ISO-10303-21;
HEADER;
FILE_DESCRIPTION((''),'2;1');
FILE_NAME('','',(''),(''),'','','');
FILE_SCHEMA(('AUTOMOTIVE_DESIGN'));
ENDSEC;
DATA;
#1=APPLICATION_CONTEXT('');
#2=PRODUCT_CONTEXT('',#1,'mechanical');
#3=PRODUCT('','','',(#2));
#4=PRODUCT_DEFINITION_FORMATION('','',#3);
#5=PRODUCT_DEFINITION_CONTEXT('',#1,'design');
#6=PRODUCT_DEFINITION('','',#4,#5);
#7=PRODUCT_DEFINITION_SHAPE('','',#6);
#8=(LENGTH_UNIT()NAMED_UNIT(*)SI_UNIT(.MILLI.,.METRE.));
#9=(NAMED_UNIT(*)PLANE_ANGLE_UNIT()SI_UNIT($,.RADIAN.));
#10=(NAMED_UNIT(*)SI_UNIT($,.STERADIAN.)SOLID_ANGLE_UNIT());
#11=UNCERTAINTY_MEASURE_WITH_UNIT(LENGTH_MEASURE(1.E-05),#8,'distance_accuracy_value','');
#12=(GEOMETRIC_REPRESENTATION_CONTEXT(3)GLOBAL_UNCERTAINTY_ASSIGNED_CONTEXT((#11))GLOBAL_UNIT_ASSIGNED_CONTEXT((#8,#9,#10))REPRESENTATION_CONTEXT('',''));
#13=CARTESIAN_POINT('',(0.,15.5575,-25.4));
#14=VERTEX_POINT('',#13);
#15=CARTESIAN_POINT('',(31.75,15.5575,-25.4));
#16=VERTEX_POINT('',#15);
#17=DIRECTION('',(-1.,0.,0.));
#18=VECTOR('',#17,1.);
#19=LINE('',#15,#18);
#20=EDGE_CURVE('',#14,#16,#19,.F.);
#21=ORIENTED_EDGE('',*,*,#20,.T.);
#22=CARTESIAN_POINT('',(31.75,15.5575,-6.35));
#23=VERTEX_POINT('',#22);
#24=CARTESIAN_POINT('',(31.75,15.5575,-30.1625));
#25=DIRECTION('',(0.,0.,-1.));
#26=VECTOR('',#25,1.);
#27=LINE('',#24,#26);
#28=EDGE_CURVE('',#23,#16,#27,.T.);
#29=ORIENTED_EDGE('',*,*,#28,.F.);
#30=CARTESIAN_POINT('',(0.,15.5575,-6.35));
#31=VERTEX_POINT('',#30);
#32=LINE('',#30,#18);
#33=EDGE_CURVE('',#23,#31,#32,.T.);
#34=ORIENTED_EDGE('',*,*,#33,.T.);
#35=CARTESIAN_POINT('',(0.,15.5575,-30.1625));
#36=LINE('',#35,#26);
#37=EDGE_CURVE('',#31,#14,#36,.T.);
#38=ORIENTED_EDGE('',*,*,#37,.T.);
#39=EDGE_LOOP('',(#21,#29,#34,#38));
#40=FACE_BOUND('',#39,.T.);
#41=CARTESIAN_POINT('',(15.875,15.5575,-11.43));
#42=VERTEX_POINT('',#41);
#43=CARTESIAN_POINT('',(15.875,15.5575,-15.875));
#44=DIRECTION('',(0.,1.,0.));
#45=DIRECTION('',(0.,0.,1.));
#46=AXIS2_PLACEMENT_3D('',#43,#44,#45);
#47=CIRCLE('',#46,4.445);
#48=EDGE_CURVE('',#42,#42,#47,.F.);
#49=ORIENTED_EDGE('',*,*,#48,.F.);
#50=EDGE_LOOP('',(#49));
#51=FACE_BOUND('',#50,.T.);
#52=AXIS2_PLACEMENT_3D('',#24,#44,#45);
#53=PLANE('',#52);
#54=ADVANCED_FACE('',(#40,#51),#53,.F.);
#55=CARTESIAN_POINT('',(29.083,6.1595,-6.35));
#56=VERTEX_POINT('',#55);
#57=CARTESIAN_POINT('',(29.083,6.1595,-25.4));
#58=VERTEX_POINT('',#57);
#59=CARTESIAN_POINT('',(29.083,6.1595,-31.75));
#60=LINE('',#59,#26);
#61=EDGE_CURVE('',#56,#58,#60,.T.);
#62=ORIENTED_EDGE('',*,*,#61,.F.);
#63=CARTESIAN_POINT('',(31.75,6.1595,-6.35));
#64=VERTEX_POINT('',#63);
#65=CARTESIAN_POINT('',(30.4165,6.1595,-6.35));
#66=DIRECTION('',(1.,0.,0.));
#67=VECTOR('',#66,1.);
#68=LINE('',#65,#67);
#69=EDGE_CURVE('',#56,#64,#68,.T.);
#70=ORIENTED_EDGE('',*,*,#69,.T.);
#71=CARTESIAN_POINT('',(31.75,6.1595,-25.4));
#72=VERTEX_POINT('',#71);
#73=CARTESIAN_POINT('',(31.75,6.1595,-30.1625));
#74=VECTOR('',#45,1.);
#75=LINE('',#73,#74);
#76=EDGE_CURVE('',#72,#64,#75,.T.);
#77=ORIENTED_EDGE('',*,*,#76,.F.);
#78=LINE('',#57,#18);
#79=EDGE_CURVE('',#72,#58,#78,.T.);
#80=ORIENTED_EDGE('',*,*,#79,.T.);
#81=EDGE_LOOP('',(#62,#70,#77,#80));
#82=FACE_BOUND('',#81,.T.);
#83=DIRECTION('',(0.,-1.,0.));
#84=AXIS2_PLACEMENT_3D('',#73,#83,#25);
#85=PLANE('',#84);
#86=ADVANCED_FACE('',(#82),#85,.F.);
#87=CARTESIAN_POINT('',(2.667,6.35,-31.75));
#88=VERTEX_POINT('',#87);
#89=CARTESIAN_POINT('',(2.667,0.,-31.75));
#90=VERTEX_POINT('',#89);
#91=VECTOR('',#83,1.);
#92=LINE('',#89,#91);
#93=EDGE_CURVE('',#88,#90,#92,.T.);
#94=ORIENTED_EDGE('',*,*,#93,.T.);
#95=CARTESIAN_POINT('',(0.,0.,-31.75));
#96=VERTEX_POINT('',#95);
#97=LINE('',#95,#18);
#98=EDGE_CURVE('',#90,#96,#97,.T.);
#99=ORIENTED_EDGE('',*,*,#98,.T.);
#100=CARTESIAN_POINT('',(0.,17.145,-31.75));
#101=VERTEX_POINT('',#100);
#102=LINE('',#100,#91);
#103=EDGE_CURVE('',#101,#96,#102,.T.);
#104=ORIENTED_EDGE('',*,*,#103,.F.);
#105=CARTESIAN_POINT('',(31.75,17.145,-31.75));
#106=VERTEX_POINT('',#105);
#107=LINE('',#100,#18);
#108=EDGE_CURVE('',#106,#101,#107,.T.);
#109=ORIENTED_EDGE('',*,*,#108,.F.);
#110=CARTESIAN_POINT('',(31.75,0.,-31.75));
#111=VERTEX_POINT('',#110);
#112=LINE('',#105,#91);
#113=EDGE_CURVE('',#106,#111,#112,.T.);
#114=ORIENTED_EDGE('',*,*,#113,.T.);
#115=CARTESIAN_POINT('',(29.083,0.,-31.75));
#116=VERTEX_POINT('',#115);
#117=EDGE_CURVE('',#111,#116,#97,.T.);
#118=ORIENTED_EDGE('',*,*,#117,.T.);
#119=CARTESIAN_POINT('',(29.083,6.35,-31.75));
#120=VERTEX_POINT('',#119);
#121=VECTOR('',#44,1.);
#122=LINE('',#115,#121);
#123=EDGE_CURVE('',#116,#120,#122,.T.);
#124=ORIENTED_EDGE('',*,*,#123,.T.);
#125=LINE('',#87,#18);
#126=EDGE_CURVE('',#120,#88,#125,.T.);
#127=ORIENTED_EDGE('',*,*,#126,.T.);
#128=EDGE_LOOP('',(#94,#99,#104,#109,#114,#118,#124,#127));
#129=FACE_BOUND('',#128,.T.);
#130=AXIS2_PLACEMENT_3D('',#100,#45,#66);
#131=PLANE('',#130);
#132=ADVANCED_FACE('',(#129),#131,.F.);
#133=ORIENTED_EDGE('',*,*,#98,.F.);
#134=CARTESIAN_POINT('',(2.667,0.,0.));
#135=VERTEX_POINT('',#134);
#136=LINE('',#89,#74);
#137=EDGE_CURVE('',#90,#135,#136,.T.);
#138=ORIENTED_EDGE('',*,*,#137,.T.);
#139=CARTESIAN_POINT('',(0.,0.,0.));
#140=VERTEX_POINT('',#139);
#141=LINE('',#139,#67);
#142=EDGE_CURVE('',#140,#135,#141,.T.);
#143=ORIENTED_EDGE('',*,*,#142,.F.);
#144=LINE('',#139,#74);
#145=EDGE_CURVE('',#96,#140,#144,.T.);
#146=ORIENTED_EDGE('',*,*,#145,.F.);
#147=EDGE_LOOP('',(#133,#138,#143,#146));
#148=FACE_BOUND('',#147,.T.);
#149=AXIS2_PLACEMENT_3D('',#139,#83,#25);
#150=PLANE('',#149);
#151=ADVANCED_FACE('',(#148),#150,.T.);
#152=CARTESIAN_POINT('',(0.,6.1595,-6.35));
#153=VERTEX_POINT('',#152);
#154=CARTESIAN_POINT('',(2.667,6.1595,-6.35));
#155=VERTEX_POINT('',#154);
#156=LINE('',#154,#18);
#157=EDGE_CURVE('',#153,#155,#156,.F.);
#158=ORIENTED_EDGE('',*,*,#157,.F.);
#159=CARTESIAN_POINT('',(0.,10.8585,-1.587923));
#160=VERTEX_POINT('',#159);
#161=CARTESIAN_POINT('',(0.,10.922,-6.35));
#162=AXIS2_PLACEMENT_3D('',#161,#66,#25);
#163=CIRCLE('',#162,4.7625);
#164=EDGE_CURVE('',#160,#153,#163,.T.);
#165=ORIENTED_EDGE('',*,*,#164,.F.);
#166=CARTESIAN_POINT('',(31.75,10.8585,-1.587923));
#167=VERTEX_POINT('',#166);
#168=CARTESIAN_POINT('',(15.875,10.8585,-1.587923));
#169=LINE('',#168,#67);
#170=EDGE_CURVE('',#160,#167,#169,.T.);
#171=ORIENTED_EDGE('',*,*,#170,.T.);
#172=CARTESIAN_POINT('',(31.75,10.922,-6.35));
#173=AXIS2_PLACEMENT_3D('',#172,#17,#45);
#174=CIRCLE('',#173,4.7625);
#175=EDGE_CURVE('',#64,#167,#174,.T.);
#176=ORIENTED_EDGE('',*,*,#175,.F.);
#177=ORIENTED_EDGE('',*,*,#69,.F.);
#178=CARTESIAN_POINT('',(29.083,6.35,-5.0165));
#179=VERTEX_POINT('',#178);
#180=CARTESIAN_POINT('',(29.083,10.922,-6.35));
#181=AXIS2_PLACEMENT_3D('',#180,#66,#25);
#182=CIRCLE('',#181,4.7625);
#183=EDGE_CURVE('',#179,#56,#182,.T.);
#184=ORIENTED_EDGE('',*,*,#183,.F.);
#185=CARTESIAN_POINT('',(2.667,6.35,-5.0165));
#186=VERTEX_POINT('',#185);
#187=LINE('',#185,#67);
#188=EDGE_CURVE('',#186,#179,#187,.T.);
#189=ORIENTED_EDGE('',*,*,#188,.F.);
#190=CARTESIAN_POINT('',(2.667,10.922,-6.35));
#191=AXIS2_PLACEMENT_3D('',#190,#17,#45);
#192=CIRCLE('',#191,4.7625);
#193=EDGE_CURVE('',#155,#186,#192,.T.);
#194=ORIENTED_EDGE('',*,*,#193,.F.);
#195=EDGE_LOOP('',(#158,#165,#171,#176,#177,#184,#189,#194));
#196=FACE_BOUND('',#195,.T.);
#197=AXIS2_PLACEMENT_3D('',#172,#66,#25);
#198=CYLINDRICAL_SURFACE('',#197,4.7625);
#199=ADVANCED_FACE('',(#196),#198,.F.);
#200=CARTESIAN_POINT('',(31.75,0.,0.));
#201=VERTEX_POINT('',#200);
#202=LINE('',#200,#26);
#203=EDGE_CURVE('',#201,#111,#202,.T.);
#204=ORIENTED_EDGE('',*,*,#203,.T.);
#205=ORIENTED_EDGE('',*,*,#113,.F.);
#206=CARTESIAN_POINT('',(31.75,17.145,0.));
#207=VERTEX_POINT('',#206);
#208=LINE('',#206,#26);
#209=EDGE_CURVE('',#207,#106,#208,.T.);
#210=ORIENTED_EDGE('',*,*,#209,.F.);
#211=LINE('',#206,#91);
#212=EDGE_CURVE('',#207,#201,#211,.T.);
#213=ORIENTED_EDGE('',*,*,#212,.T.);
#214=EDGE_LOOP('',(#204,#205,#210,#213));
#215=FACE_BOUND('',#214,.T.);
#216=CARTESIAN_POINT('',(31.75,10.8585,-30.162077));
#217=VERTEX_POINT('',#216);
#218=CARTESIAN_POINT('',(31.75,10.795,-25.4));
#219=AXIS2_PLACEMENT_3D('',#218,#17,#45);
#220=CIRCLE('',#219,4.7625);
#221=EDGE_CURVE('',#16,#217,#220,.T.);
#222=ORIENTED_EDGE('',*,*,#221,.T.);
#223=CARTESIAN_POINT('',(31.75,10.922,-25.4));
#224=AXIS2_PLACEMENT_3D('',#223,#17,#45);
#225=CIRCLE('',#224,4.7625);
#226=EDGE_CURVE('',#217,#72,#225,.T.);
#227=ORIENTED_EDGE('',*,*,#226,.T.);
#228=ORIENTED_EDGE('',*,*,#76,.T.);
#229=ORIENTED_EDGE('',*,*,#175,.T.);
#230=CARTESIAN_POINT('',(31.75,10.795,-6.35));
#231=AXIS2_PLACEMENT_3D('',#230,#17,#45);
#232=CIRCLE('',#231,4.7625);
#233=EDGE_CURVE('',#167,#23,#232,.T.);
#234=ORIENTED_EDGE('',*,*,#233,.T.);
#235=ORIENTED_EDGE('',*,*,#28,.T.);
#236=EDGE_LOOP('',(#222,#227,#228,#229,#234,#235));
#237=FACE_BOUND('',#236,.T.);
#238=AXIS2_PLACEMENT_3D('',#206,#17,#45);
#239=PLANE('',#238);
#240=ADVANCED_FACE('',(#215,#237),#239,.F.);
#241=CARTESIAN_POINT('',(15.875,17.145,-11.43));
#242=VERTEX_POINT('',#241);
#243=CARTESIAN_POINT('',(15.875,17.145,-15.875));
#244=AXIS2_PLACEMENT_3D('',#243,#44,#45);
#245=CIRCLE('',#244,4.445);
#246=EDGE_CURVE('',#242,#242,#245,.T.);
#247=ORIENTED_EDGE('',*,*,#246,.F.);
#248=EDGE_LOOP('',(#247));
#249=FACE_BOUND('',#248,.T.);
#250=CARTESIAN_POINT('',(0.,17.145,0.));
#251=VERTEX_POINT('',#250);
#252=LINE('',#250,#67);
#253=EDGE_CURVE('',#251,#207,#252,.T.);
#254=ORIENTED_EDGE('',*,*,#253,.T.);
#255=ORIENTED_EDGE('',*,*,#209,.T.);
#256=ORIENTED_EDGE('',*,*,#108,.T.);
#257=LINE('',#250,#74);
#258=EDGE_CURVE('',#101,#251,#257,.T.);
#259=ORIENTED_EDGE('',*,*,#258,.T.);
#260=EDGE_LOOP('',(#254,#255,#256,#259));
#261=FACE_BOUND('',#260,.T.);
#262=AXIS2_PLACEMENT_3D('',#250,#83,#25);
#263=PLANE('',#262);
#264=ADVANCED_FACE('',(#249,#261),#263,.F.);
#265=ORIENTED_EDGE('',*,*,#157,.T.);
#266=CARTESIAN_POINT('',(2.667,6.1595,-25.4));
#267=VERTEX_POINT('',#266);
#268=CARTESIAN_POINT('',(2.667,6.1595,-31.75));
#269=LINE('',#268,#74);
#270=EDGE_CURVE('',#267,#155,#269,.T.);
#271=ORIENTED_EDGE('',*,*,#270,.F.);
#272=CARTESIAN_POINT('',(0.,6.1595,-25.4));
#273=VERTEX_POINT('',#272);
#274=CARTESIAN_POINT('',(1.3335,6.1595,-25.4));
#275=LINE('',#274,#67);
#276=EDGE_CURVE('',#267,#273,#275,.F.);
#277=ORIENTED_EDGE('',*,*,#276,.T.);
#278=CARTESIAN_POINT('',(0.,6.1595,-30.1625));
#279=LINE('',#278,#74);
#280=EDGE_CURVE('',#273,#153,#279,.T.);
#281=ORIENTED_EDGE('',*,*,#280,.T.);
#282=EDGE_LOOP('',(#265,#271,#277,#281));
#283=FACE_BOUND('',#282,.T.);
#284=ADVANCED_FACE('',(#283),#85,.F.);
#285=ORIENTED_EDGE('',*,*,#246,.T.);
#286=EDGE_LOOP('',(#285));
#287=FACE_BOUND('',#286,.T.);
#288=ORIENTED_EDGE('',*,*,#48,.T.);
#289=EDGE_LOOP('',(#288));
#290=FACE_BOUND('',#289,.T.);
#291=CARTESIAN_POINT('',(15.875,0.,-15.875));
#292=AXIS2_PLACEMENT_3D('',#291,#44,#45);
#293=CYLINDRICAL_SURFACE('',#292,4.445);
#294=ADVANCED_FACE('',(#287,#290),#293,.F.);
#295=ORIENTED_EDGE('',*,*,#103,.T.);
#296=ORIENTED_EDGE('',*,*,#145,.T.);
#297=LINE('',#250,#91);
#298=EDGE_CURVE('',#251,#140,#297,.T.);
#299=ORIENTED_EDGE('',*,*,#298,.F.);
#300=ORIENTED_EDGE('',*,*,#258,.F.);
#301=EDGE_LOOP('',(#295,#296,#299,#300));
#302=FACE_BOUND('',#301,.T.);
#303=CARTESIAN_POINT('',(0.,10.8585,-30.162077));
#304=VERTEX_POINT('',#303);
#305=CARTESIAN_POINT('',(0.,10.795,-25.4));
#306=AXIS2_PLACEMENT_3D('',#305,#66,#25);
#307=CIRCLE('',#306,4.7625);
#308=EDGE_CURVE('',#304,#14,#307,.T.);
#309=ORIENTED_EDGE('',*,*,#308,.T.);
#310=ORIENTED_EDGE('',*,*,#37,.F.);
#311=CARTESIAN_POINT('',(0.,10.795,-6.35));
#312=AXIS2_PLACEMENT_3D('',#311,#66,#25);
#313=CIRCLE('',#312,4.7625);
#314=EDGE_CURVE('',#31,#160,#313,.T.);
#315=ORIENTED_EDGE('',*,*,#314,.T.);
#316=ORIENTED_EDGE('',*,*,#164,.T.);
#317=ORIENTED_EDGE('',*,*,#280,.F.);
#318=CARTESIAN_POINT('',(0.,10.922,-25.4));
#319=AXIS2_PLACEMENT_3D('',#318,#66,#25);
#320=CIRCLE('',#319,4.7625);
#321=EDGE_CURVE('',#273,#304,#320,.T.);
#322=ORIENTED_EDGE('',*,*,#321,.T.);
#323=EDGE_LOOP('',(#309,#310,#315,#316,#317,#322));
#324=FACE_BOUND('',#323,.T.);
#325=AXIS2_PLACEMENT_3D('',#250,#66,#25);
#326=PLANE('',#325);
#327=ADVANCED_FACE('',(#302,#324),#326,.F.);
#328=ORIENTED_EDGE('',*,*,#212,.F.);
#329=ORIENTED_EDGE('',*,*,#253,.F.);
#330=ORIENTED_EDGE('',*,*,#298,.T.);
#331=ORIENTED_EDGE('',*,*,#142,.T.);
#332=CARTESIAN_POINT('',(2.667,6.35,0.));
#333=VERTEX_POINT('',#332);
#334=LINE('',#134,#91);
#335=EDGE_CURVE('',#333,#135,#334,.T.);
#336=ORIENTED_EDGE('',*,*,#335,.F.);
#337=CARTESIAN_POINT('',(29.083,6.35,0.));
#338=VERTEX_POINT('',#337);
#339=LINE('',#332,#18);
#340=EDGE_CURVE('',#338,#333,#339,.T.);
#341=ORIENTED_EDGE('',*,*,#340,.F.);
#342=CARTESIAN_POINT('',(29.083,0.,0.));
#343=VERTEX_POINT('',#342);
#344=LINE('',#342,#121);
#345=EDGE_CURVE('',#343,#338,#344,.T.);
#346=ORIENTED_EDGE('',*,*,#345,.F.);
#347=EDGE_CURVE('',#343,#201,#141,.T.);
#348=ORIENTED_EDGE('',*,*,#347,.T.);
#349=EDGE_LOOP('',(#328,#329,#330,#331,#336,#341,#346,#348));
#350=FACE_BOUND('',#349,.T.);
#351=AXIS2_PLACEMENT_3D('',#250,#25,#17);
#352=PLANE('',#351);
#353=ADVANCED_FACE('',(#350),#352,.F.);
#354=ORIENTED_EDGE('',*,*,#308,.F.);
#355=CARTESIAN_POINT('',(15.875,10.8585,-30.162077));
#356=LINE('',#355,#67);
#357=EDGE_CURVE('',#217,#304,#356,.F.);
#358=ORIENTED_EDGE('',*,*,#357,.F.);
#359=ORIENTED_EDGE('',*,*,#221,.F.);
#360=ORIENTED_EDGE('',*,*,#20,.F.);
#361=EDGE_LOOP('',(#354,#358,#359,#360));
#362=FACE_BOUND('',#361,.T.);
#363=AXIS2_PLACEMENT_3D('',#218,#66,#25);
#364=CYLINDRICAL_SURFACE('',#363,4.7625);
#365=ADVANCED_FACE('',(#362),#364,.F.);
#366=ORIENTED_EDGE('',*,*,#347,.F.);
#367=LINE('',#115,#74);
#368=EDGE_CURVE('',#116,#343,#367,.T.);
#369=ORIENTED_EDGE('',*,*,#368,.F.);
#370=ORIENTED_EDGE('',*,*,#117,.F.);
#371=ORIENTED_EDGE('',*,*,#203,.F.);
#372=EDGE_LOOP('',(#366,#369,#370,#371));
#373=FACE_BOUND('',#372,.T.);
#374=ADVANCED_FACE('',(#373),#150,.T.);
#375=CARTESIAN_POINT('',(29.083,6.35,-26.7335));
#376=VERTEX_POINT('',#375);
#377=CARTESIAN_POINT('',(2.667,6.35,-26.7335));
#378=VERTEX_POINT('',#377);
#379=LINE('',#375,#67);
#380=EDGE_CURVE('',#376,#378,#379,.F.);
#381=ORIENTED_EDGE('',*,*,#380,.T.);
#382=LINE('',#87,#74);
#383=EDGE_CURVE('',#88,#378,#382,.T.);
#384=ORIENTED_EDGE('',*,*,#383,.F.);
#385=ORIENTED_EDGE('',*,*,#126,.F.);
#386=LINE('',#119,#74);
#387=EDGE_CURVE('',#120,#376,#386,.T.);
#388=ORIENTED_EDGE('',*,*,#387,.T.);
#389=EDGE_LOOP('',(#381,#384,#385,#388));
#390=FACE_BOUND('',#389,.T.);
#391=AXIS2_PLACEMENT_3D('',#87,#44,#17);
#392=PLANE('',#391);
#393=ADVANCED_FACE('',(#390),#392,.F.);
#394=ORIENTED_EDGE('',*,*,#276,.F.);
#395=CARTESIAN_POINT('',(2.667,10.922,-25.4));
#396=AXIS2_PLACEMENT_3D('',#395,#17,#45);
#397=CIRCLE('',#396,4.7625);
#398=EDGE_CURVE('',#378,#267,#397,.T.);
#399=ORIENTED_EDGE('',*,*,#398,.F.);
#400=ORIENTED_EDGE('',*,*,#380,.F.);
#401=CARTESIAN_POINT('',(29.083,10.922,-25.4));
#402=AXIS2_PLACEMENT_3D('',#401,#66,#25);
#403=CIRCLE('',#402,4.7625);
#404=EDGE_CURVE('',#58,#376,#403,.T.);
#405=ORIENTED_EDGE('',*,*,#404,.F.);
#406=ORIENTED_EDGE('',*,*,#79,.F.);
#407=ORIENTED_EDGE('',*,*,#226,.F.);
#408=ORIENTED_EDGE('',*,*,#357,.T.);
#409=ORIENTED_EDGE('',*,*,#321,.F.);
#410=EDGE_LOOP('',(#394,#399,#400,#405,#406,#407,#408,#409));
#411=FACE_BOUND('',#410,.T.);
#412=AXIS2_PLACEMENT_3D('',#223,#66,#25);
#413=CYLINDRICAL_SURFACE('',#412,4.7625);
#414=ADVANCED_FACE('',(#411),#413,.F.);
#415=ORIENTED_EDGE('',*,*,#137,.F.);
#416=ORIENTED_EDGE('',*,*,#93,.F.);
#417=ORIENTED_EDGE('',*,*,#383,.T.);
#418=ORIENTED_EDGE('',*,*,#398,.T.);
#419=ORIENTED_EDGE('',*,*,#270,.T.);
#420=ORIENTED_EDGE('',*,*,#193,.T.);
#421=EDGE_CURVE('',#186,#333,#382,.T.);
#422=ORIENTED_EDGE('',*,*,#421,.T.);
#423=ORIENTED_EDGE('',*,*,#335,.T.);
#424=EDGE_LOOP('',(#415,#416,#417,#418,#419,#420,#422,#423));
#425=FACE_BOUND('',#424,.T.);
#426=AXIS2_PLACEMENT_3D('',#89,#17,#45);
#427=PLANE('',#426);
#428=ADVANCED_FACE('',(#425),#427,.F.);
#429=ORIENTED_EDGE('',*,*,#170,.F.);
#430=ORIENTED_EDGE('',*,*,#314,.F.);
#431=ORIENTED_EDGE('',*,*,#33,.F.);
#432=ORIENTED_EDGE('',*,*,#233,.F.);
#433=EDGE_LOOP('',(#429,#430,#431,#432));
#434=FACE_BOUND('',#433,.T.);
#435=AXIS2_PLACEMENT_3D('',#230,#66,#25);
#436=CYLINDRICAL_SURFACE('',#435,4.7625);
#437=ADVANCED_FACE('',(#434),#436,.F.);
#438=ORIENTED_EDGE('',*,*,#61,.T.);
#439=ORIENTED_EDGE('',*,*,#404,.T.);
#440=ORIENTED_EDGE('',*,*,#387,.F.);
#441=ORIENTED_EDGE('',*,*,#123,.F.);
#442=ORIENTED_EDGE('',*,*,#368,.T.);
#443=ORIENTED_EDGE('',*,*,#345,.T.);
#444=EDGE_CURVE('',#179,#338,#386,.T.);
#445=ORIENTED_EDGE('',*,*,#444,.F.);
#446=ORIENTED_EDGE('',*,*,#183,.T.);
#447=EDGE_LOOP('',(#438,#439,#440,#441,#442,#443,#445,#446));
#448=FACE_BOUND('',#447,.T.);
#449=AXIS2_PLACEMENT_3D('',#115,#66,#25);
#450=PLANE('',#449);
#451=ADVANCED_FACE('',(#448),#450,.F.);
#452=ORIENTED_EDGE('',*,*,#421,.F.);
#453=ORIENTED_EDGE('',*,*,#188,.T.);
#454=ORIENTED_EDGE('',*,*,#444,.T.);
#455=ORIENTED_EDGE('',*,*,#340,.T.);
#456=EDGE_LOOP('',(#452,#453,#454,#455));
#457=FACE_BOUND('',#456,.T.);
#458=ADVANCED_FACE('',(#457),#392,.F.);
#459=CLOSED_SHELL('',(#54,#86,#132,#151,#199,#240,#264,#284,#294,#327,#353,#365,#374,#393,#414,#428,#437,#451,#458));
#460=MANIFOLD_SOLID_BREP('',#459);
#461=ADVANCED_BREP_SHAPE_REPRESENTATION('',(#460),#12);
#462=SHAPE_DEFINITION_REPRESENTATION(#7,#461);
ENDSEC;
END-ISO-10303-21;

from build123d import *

# Parameters (mm, degrees)
SKETCH1_W           = 31.75
SKETCH1_H           = 31.75
BOSS_EXTRUDE1_DEPTH = 17.145
SKETCH2_R           = 4.445
CUT_EXTRUDE1_DEPTH  = 49.063250254
SKETCH3_W           = 26.416
SKETCH3_H           = 6.35
CUT_EXTRUDE2_DEPTH  = 49.063250254
SKETCH4_W           = 28.575
SKETCH4_H           = 9.398
CUT_EXTRUDE3_DEPTH  = 49.063250254
FILLET2_DEPTH       = 31.75
FILLET2_2_DEPTH     = 2.667
FILLET2_START       = 29.083
FILLET2_3_DEPTH     = 2.667


with BuildPart() as part:
    # Sketch1 → Boss-Extrude1 (new body)
    with BuildSketch(Plane(origin=(0, 0, 0), x_dir=(1, 0, 0), z_dir=(0, 1, 0))):
        with Locations((15.875, 15.875)):
            Rectangle(SKETCH1_W, SKETCH1_H)
    extrude(amount=BOSS_EXTRUDE1_DEPTH)

    # Sketch2 → Cut-Extrude1 (cut, through all)
    with BuildSketch(Plane(origin=(0, 17.145, 0), x_dir=(1, 0, 0), z_dir=(0, 1, 0))):
        with Locations(Location((15.875, 15.875, 0), (0, 0, 270))):
            Circle(SKETCH2_R)
    extrude(amount=-CUT_EXTRUDE1_DEPTH, mode=Mode.SUBTRACT)

    # Sketch3 → Cut-Extrude2 (cut, through all)
    with BuildSketch(Plane.XY):
        with Locations((15.875, 3.175)):
            Rectangle(SKETCH3_W, SKETCH3_H)
    extrude(amount=-CUT_EXTRUDE2_DEPTH, mode=Mode.SUBTRACT)

    # Sketch4 → Cut-Extrude3 (cut, through all)
    with BuildSketch(Plane.ZY):
        with Locations((-15.875, 10.8585)):
            Rectangle(SKETCH4_W, SKETCH4_H)
    extrude(amount=-CUT_EXTRUDE3_DEPTH, mode=Mode.SUBTRACT)

    # Fillet2: read off the stored shape, not the designer's step
    # Fillet2 outline → Fillet2 (add)
    with BuildSketch(Plane.YZ):
        with BuildLine():
            Line((6.35, -26.7335), (6.35, -30.1625))
            Line((6.35, -30.1625), (15.5575, -30.1625))
            Line((15.5575, -30.1625), (15.5575, -25.4))
            ThreePointArc((15.5575, -25.4), (14.184972345, -28.745070067), (10.8585, -30.162076648))
            ThreePointArc((10.8585, -30.162076648), (8.039162939, -29.190864906), (6.35, -26.7335))
        make_face()
        with BuildLine():
            ThreePointArc((10.8585, -1.587923352), (14.184972345, -3.004929933), (15.5575, -6.35))
            Line((15.5575, -6.35), (15.5575, -1.5875))
            Line((15.5575, -1.5875), (6.35, -1.5875))
            Line((6.35, -1.5875), (6.35, -5.0165))
            ThreePointArc((6.35, -5.0165), (8.039162939, -2.559135094), (10.8585, -1.587923352))
        make_face()
    extrude(amount=FILLET2_DEPTH)

    # Fillet2 2 outline → Fillet2 2 (add)
    with BuildSketch(Plane.YZ):
        with BuildLine():
            Line((6.1595, -30.1625), (6.35, -30.1625))
            Line((6.35, -30.1625), (6.35, -26.7335))
            ThreePointArc((6.35, -26.7335), (6.207365536, -26.073519209), (6.1595, -25.4))
            Line((6.1595, -25.4), (6.1595, -30.1625))
        make_face()
        with BuildLine():
            Line((6.1595, -1.5875), (6.1595, -6.35))
            ThreePointArc((6.1595, -6.35), (6.207365536, -5.676480791), (6.35, -5.0165))
            Line((6.35, -5.0165), (6.35, -1.5875))
            Line((6.35, -1.5875), (6.1595, -1.5875))
        make_face()
    extrude(amount=FILLET2_2_DEPTH)

    # Fillet2 3 outline → Fillet2 3 (add)
    with BuildSketch(Plane.YZ.offset(FILLET2_START)):
        with BuildLine():
            Line((6.1595, -30.1625), (6.35, -30.1625))
            Line((6.35, -30.1625), (6.35, -26.7335))
            ThreePointArc((6.35, -26.7335), (6.207365536, -26.073519209), (6.1595, -25.4))
            Line((6.1595, -25.4), (6.1595, -30.1625))
        make_face()
        with BuildLine():
            Line((6.1595, -1.5875), (6.1595, -6.35))
            ThreePointArc((6.1595, -6.35), (6.207365536, -5.676480791), (6.35, -5.0165))
            Line((6.35, -5.0165), (6.35, -1.5875))
            Line((6.35, -1.5875), (6.1595, -1.5875))
        make_face()
    extrude(amount=FILLET2_3_DEPTH)


solid = part.part
